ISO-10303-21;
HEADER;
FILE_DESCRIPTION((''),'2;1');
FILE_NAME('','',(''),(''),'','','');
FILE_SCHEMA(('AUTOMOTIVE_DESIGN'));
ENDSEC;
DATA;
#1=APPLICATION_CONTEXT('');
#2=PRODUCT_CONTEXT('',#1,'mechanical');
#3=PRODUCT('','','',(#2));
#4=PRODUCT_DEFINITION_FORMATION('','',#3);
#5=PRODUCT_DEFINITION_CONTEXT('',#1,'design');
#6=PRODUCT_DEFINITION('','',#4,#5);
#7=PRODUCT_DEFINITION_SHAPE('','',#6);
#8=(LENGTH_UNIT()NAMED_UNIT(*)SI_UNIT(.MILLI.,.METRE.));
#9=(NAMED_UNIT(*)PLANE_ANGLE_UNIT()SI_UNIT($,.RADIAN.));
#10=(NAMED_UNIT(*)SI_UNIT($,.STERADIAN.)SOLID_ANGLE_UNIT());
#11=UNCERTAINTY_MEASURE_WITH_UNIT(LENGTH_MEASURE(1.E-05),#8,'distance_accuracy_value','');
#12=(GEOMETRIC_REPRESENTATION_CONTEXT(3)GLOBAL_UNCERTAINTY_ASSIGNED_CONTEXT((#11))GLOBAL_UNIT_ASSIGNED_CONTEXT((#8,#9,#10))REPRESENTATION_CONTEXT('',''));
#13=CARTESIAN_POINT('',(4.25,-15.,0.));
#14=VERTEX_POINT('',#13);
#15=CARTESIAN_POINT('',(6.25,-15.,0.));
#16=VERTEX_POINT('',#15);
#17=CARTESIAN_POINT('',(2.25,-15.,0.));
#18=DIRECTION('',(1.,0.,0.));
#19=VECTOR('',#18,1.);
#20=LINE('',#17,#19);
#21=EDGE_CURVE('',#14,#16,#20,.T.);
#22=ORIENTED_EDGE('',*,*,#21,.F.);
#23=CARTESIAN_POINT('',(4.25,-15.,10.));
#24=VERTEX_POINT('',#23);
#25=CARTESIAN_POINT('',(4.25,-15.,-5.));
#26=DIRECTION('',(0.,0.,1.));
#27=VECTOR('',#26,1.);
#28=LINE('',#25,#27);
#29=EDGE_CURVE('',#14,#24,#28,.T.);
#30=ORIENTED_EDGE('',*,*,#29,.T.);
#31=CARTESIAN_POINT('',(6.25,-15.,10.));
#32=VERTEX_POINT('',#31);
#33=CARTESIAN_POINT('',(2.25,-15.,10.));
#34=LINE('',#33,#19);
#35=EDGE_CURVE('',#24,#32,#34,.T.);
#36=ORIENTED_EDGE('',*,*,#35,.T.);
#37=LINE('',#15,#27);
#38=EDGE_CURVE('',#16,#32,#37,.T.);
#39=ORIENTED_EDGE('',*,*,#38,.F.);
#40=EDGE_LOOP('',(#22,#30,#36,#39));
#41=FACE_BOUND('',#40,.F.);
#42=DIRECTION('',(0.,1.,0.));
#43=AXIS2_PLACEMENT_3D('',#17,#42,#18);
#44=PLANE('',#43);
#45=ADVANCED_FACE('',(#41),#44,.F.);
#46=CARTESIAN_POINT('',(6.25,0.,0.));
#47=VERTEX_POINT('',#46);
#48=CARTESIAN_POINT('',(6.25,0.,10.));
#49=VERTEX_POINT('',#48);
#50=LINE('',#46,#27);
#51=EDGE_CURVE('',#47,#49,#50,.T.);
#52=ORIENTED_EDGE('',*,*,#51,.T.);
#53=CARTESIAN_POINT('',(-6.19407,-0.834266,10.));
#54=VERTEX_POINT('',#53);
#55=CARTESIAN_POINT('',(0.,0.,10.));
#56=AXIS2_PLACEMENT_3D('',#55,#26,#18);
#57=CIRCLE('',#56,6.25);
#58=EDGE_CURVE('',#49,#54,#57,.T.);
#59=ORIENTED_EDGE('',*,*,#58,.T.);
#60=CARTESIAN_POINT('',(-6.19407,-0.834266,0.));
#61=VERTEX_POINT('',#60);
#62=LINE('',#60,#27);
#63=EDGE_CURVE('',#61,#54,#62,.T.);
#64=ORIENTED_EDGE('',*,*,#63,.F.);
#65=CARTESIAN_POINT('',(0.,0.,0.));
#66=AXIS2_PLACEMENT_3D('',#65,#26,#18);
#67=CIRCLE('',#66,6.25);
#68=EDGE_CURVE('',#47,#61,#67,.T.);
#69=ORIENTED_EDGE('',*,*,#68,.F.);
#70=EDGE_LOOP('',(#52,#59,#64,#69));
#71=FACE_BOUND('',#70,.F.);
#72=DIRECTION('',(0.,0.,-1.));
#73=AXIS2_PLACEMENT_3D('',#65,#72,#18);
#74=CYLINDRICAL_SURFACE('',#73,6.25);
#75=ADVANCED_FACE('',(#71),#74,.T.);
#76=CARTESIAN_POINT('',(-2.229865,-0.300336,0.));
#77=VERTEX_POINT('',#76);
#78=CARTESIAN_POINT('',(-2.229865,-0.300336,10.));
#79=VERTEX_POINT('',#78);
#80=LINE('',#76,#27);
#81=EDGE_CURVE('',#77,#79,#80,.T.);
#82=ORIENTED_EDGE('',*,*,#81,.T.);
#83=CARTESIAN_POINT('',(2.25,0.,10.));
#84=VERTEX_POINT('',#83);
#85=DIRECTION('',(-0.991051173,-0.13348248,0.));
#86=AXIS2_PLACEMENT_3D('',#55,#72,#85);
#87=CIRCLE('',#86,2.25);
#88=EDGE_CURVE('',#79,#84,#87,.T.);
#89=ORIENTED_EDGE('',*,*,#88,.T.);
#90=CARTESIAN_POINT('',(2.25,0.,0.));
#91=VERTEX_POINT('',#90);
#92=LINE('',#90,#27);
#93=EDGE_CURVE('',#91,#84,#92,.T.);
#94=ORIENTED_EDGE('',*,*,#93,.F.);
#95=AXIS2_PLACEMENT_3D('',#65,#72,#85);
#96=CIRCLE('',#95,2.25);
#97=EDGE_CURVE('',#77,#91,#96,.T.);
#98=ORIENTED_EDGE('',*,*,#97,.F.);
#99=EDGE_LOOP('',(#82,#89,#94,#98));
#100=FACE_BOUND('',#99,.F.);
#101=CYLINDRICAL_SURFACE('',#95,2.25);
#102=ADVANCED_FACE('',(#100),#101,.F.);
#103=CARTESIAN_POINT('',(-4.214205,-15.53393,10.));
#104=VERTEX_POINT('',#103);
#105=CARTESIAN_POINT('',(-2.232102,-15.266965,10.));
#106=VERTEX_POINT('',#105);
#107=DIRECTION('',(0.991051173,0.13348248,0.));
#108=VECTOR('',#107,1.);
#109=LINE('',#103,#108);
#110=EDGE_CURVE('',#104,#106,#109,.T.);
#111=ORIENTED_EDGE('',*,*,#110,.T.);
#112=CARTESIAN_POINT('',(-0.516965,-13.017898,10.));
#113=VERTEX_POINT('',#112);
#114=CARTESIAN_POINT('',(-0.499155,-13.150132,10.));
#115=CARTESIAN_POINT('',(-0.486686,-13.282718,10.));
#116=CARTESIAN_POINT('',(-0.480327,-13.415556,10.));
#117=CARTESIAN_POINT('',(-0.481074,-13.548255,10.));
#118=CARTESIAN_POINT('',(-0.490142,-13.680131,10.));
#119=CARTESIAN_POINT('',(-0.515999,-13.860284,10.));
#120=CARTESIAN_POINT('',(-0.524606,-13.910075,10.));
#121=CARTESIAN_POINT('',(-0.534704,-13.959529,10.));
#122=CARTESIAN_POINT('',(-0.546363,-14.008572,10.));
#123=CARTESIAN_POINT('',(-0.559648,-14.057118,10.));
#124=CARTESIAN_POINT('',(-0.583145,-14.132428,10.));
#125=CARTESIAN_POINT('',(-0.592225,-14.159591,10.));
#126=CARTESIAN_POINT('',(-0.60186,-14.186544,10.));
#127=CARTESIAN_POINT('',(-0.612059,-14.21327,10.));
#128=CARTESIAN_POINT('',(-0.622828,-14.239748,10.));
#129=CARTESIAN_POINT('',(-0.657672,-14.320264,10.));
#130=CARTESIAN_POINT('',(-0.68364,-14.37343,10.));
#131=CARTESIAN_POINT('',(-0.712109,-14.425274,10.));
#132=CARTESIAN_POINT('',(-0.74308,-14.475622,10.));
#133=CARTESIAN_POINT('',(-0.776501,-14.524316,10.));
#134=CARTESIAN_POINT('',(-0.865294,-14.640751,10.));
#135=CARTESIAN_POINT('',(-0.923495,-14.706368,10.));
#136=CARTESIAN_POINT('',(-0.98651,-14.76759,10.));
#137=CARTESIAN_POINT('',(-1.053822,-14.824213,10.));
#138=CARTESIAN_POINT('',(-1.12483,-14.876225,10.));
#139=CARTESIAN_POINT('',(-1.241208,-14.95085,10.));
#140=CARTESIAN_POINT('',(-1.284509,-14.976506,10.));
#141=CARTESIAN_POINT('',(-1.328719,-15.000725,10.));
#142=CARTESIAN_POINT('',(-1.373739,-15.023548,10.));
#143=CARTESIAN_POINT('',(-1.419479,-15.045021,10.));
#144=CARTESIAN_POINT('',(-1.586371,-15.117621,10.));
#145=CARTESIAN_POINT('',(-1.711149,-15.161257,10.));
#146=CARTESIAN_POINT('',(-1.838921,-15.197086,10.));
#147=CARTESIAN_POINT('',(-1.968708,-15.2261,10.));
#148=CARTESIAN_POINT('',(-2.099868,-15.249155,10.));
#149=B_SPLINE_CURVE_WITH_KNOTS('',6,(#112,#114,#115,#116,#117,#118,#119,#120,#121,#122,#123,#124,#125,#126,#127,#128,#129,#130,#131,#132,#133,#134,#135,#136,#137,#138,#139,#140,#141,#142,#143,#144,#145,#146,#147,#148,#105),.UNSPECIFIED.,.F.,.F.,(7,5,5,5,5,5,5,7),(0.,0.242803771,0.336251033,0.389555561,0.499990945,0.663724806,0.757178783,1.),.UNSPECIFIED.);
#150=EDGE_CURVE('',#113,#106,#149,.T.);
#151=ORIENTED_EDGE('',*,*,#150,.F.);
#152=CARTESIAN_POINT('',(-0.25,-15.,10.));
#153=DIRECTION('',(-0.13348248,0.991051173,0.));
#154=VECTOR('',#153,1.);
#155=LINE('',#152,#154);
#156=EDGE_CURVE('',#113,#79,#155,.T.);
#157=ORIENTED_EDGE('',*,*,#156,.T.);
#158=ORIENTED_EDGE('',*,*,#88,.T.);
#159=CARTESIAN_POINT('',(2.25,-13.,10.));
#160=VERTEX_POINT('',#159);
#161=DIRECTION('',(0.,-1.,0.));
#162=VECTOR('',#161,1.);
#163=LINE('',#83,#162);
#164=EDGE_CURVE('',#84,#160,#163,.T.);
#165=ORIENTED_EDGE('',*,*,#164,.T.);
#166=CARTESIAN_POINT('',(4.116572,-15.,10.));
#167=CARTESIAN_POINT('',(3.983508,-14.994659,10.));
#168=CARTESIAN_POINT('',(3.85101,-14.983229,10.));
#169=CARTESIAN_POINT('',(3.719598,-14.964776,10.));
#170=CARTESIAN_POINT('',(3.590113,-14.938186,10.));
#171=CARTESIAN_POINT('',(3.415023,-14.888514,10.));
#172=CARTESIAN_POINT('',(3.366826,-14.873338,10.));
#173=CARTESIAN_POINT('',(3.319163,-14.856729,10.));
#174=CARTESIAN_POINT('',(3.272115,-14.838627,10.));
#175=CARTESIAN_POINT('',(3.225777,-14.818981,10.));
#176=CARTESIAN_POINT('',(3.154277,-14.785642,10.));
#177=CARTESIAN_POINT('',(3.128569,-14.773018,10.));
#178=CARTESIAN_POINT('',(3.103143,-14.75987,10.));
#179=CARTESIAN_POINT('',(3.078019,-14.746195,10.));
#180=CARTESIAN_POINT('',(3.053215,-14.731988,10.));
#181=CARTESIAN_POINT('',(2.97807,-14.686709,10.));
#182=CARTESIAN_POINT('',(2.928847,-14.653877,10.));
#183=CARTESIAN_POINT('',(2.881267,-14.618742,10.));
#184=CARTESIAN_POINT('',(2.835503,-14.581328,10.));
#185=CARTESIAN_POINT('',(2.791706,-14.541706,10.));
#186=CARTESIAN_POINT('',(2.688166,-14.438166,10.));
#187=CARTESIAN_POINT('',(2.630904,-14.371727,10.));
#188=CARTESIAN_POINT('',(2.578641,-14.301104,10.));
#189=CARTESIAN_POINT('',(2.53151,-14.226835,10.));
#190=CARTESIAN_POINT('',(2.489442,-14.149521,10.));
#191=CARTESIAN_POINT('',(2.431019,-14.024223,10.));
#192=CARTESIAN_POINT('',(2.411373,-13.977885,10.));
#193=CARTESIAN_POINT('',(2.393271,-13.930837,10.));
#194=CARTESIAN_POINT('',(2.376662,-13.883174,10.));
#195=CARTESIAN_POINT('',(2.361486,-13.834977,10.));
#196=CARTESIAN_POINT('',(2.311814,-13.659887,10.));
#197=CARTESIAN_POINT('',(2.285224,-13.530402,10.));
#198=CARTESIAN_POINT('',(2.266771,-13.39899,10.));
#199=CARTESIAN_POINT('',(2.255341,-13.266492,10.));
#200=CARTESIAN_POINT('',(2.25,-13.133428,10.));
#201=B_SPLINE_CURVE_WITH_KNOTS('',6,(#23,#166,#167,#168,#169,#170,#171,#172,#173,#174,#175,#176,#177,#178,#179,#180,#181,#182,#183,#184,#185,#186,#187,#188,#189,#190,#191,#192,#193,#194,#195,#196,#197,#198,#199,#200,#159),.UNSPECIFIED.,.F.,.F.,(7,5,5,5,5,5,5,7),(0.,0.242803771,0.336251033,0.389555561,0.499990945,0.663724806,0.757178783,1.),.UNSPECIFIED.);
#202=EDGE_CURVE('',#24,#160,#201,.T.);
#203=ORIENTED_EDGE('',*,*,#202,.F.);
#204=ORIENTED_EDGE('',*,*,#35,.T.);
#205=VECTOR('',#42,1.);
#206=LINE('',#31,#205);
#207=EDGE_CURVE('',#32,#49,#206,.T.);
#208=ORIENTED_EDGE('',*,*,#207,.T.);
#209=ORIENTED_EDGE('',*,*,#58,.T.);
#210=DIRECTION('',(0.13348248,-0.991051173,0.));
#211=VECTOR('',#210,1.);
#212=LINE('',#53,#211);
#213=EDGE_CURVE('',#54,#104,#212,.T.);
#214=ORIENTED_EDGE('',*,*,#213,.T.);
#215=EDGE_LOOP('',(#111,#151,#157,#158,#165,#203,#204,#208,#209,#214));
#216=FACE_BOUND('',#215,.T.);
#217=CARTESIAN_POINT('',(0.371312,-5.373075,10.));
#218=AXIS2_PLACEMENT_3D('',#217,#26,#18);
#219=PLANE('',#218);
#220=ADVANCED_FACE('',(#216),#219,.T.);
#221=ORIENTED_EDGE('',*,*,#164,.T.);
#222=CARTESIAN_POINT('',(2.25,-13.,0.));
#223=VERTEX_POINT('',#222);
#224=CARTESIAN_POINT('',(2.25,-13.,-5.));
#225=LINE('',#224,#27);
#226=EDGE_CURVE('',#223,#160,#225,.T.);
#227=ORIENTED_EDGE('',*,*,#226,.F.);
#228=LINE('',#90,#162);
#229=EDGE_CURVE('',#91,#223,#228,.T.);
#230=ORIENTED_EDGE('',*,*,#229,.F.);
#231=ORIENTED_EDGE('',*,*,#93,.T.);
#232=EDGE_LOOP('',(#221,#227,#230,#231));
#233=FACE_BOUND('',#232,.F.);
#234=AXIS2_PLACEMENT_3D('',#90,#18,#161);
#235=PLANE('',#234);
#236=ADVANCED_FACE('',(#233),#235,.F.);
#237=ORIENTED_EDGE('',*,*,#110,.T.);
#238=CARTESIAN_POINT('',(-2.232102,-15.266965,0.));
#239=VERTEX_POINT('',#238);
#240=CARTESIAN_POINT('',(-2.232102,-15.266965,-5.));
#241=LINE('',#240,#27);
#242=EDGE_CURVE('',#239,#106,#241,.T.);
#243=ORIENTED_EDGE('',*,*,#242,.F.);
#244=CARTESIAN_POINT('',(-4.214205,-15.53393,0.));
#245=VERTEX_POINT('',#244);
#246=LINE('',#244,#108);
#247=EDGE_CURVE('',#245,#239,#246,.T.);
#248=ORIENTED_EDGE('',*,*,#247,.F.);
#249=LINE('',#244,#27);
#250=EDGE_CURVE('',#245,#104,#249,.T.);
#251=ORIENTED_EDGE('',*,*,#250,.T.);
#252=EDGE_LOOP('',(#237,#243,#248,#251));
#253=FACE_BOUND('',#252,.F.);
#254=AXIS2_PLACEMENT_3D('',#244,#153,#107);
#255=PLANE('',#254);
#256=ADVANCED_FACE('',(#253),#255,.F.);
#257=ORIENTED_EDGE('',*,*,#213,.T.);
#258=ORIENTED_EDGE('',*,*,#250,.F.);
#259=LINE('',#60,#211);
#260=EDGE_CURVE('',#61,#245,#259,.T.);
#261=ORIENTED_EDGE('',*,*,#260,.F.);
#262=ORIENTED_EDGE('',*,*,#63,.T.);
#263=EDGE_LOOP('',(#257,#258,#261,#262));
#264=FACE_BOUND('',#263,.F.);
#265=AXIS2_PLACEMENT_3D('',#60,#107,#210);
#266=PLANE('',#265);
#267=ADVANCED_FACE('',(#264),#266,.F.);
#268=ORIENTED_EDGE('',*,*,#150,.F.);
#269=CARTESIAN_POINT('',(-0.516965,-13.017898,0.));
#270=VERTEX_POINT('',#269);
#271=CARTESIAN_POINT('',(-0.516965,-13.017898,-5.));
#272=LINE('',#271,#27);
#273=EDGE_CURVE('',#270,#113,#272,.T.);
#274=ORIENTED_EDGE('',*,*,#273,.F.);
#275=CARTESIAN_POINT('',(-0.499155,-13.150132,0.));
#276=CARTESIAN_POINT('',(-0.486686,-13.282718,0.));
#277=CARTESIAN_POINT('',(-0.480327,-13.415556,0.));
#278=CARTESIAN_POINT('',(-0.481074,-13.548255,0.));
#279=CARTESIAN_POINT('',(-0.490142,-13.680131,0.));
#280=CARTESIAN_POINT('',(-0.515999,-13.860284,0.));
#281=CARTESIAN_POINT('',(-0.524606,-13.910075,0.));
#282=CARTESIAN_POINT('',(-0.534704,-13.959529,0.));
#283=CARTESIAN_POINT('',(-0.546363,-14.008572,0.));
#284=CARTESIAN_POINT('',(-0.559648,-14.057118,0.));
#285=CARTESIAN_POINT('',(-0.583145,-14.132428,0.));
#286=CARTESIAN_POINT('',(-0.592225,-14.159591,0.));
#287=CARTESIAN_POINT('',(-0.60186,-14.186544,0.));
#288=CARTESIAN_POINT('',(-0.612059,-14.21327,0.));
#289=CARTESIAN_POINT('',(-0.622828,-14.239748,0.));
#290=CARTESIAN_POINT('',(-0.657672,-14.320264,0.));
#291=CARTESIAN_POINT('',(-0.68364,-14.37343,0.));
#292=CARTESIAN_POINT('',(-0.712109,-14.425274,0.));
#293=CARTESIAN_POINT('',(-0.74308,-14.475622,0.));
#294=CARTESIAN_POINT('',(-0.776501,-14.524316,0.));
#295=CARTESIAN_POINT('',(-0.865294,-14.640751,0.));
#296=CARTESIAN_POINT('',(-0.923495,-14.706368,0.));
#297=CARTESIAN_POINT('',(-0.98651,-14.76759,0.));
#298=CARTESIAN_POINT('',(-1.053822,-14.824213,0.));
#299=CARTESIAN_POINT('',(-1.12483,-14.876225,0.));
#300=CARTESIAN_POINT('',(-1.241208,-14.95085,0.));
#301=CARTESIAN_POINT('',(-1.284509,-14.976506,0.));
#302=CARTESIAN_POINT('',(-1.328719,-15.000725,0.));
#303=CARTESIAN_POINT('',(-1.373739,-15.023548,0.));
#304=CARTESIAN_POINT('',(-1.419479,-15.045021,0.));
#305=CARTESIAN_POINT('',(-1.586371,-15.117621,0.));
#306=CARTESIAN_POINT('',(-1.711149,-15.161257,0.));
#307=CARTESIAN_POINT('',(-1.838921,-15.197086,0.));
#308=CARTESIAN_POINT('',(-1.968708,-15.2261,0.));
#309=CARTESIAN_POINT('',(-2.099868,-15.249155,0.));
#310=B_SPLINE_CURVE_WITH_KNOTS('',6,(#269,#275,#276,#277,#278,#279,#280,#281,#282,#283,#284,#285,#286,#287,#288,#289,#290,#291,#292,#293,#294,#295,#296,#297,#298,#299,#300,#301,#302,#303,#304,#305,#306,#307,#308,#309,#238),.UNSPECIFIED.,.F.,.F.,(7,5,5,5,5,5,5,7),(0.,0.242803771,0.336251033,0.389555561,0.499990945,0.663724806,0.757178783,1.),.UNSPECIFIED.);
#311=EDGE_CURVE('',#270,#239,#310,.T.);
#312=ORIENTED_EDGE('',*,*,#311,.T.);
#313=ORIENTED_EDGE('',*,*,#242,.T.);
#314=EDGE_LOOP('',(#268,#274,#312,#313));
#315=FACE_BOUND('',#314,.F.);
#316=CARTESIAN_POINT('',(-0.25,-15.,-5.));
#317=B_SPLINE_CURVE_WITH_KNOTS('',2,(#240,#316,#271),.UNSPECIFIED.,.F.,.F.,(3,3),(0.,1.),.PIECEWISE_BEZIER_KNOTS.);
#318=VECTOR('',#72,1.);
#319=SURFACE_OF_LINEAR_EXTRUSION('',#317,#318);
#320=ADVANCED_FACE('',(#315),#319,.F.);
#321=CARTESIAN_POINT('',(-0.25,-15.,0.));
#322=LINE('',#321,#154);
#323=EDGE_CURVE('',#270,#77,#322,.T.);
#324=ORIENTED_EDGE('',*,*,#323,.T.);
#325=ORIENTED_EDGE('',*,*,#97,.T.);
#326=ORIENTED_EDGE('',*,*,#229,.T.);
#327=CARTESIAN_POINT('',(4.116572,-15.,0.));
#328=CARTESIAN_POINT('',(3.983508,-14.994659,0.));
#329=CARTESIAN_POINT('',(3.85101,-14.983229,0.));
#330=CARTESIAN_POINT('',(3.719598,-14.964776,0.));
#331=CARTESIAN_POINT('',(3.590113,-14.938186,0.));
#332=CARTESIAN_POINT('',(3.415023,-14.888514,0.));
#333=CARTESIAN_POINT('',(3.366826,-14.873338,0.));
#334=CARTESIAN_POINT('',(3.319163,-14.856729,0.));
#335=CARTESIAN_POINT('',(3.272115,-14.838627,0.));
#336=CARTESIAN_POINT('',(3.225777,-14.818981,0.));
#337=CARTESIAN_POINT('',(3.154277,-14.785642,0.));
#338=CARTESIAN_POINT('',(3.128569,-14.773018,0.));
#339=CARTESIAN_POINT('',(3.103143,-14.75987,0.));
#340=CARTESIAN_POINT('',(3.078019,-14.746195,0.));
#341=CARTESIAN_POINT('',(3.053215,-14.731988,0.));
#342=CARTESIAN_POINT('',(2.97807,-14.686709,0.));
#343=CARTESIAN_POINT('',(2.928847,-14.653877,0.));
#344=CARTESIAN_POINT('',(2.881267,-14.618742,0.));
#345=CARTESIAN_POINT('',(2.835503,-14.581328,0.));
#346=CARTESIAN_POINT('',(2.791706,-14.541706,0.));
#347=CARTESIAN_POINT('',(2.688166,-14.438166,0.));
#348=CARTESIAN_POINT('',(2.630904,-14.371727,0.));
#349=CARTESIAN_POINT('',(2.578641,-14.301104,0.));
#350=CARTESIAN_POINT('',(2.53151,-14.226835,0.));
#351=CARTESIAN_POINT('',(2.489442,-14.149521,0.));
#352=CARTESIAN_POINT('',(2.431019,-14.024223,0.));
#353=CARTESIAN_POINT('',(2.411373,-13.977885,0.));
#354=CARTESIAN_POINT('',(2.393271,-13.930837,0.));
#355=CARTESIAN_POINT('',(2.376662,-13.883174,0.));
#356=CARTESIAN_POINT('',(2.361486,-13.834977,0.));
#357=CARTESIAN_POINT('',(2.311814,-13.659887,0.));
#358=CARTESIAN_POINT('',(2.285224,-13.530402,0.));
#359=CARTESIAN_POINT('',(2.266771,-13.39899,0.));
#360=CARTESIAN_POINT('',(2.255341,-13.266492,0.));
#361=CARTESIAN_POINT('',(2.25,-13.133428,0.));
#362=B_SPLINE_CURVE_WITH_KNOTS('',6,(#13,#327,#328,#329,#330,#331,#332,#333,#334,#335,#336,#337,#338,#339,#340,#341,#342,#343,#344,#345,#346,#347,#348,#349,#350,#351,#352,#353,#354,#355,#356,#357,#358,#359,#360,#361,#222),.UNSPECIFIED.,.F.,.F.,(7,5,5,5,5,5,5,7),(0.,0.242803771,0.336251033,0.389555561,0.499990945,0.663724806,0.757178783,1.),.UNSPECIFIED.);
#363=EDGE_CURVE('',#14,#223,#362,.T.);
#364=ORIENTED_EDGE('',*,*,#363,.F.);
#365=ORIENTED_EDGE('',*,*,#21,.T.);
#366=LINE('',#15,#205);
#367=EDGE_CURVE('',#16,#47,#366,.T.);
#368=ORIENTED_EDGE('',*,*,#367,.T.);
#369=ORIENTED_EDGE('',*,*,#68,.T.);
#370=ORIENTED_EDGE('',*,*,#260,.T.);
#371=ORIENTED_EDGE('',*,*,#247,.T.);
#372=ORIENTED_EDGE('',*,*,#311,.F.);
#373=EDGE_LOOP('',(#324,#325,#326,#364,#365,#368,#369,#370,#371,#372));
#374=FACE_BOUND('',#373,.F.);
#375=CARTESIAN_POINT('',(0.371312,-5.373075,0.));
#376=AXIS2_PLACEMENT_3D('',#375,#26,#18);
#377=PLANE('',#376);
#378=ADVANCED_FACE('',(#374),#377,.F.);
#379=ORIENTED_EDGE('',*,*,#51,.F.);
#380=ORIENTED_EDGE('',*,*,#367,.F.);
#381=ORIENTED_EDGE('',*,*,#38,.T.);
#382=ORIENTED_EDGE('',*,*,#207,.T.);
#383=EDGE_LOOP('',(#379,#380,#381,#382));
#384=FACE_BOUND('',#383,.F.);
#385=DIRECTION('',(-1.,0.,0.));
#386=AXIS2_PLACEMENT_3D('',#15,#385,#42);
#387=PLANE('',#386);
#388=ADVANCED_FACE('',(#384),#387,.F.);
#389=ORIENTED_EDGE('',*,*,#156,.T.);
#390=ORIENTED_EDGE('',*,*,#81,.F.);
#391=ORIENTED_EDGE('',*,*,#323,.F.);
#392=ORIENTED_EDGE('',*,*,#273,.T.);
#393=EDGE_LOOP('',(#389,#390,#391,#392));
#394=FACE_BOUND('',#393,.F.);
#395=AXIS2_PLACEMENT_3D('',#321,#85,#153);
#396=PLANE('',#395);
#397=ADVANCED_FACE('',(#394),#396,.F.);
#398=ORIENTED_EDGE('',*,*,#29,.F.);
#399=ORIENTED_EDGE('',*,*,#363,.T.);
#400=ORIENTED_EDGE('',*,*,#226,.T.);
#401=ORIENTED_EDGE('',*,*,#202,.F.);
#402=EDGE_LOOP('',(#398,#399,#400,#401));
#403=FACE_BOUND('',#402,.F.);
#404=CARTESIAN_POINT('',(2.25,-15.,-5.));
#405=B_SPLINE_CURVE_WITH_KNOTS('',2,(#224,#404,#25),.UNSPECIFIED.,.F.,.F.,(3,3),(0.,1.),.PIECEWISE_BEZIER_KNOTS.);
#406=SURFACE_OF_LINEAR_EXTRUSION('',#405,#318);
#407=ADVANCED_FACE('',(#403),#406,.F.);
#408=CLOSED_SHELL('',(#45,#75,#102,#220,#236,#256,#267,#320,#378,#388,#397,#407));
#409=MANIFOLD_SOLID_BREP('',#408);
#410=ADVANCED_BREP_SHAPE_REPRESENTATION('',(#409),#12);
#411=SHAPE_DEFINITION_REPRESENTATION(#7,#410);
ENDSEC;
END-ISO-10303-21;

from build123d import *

# Parameters (mm, degrees)
F1_DEPTH    = 10
F2_T1_DEPTH = 20


# Not quite as in the source:
# - a fillet or chamfer that OpenCascade refuses, or shapes differently, is made with other operations: its cross-section is extruded or revolved along the edge and cut away or added


with BuildPart() as f1:
    # F0 (on Top) → F1 (new body)
    with BuildSketch(Plane.XY):
        with BuildLine():
            ThreePointArc((-2.2298651391, -0.300335581), (-0.1505048785, 2.2449606414), (2.25, 0))
            Line((2.25, 0), (2.25, -15))
            Line((2.25, -15), (6.25, -15))
            Line((6.25, -15), (6.25, 0))
            ThreePointArc((6.25, 0), (-0.418069107, 6.2360017817), (-6.194069831, -0.8342655028))
            Line((-6.194069831, -0.8342655028), (-4.2142046918, -15.5339299218))
            Line((-4.2142046918, -15.5339299218), (-0.25, -15))
            Line((-0.25, -15), (-2.2298651391, -0.300335581))
        make_face()
    extrude(amount=F1_DEPTH)

    # F2: fillet of radius 2 on 2 edges, made by hand

    # F2_s2 → F2_t1 (cut)
    with BuildSketch(Plane.XY.offset(-5)):
        with BuildLine():
            add(Edge.make_bspline(
                [(-2.2321023459, -15.2669649609), (-0.25, -15), (-0.5169649609, -13.0178976541)],
                knots=[0, 0, 0, 1, 1, 1], degree=2, weights=[1, 1, 1]))
            Line((-0.5169649609, -13.0178976541), (-0.25, -15))
            Line((-0.25, -15), (-2.2321023459, -15.2669649609))
        make_face()
        with BuildLine():
            add(Edge.make_bspline(
                [(2.25, -13), (2.25, -15), (4.25, -15)],
                knots=[0, 0, 0, 1, 1, 1], degree=2, weights=[1, 1, 1]))
            Line((4.25, -15), (2.25, -15))
            Line((2.25, -15), (2.25, -13))
        make_face()
    extrude(amount=F2_T1_DEPTH, mode=Mode.SUBTRACT)


solid = f1.part
